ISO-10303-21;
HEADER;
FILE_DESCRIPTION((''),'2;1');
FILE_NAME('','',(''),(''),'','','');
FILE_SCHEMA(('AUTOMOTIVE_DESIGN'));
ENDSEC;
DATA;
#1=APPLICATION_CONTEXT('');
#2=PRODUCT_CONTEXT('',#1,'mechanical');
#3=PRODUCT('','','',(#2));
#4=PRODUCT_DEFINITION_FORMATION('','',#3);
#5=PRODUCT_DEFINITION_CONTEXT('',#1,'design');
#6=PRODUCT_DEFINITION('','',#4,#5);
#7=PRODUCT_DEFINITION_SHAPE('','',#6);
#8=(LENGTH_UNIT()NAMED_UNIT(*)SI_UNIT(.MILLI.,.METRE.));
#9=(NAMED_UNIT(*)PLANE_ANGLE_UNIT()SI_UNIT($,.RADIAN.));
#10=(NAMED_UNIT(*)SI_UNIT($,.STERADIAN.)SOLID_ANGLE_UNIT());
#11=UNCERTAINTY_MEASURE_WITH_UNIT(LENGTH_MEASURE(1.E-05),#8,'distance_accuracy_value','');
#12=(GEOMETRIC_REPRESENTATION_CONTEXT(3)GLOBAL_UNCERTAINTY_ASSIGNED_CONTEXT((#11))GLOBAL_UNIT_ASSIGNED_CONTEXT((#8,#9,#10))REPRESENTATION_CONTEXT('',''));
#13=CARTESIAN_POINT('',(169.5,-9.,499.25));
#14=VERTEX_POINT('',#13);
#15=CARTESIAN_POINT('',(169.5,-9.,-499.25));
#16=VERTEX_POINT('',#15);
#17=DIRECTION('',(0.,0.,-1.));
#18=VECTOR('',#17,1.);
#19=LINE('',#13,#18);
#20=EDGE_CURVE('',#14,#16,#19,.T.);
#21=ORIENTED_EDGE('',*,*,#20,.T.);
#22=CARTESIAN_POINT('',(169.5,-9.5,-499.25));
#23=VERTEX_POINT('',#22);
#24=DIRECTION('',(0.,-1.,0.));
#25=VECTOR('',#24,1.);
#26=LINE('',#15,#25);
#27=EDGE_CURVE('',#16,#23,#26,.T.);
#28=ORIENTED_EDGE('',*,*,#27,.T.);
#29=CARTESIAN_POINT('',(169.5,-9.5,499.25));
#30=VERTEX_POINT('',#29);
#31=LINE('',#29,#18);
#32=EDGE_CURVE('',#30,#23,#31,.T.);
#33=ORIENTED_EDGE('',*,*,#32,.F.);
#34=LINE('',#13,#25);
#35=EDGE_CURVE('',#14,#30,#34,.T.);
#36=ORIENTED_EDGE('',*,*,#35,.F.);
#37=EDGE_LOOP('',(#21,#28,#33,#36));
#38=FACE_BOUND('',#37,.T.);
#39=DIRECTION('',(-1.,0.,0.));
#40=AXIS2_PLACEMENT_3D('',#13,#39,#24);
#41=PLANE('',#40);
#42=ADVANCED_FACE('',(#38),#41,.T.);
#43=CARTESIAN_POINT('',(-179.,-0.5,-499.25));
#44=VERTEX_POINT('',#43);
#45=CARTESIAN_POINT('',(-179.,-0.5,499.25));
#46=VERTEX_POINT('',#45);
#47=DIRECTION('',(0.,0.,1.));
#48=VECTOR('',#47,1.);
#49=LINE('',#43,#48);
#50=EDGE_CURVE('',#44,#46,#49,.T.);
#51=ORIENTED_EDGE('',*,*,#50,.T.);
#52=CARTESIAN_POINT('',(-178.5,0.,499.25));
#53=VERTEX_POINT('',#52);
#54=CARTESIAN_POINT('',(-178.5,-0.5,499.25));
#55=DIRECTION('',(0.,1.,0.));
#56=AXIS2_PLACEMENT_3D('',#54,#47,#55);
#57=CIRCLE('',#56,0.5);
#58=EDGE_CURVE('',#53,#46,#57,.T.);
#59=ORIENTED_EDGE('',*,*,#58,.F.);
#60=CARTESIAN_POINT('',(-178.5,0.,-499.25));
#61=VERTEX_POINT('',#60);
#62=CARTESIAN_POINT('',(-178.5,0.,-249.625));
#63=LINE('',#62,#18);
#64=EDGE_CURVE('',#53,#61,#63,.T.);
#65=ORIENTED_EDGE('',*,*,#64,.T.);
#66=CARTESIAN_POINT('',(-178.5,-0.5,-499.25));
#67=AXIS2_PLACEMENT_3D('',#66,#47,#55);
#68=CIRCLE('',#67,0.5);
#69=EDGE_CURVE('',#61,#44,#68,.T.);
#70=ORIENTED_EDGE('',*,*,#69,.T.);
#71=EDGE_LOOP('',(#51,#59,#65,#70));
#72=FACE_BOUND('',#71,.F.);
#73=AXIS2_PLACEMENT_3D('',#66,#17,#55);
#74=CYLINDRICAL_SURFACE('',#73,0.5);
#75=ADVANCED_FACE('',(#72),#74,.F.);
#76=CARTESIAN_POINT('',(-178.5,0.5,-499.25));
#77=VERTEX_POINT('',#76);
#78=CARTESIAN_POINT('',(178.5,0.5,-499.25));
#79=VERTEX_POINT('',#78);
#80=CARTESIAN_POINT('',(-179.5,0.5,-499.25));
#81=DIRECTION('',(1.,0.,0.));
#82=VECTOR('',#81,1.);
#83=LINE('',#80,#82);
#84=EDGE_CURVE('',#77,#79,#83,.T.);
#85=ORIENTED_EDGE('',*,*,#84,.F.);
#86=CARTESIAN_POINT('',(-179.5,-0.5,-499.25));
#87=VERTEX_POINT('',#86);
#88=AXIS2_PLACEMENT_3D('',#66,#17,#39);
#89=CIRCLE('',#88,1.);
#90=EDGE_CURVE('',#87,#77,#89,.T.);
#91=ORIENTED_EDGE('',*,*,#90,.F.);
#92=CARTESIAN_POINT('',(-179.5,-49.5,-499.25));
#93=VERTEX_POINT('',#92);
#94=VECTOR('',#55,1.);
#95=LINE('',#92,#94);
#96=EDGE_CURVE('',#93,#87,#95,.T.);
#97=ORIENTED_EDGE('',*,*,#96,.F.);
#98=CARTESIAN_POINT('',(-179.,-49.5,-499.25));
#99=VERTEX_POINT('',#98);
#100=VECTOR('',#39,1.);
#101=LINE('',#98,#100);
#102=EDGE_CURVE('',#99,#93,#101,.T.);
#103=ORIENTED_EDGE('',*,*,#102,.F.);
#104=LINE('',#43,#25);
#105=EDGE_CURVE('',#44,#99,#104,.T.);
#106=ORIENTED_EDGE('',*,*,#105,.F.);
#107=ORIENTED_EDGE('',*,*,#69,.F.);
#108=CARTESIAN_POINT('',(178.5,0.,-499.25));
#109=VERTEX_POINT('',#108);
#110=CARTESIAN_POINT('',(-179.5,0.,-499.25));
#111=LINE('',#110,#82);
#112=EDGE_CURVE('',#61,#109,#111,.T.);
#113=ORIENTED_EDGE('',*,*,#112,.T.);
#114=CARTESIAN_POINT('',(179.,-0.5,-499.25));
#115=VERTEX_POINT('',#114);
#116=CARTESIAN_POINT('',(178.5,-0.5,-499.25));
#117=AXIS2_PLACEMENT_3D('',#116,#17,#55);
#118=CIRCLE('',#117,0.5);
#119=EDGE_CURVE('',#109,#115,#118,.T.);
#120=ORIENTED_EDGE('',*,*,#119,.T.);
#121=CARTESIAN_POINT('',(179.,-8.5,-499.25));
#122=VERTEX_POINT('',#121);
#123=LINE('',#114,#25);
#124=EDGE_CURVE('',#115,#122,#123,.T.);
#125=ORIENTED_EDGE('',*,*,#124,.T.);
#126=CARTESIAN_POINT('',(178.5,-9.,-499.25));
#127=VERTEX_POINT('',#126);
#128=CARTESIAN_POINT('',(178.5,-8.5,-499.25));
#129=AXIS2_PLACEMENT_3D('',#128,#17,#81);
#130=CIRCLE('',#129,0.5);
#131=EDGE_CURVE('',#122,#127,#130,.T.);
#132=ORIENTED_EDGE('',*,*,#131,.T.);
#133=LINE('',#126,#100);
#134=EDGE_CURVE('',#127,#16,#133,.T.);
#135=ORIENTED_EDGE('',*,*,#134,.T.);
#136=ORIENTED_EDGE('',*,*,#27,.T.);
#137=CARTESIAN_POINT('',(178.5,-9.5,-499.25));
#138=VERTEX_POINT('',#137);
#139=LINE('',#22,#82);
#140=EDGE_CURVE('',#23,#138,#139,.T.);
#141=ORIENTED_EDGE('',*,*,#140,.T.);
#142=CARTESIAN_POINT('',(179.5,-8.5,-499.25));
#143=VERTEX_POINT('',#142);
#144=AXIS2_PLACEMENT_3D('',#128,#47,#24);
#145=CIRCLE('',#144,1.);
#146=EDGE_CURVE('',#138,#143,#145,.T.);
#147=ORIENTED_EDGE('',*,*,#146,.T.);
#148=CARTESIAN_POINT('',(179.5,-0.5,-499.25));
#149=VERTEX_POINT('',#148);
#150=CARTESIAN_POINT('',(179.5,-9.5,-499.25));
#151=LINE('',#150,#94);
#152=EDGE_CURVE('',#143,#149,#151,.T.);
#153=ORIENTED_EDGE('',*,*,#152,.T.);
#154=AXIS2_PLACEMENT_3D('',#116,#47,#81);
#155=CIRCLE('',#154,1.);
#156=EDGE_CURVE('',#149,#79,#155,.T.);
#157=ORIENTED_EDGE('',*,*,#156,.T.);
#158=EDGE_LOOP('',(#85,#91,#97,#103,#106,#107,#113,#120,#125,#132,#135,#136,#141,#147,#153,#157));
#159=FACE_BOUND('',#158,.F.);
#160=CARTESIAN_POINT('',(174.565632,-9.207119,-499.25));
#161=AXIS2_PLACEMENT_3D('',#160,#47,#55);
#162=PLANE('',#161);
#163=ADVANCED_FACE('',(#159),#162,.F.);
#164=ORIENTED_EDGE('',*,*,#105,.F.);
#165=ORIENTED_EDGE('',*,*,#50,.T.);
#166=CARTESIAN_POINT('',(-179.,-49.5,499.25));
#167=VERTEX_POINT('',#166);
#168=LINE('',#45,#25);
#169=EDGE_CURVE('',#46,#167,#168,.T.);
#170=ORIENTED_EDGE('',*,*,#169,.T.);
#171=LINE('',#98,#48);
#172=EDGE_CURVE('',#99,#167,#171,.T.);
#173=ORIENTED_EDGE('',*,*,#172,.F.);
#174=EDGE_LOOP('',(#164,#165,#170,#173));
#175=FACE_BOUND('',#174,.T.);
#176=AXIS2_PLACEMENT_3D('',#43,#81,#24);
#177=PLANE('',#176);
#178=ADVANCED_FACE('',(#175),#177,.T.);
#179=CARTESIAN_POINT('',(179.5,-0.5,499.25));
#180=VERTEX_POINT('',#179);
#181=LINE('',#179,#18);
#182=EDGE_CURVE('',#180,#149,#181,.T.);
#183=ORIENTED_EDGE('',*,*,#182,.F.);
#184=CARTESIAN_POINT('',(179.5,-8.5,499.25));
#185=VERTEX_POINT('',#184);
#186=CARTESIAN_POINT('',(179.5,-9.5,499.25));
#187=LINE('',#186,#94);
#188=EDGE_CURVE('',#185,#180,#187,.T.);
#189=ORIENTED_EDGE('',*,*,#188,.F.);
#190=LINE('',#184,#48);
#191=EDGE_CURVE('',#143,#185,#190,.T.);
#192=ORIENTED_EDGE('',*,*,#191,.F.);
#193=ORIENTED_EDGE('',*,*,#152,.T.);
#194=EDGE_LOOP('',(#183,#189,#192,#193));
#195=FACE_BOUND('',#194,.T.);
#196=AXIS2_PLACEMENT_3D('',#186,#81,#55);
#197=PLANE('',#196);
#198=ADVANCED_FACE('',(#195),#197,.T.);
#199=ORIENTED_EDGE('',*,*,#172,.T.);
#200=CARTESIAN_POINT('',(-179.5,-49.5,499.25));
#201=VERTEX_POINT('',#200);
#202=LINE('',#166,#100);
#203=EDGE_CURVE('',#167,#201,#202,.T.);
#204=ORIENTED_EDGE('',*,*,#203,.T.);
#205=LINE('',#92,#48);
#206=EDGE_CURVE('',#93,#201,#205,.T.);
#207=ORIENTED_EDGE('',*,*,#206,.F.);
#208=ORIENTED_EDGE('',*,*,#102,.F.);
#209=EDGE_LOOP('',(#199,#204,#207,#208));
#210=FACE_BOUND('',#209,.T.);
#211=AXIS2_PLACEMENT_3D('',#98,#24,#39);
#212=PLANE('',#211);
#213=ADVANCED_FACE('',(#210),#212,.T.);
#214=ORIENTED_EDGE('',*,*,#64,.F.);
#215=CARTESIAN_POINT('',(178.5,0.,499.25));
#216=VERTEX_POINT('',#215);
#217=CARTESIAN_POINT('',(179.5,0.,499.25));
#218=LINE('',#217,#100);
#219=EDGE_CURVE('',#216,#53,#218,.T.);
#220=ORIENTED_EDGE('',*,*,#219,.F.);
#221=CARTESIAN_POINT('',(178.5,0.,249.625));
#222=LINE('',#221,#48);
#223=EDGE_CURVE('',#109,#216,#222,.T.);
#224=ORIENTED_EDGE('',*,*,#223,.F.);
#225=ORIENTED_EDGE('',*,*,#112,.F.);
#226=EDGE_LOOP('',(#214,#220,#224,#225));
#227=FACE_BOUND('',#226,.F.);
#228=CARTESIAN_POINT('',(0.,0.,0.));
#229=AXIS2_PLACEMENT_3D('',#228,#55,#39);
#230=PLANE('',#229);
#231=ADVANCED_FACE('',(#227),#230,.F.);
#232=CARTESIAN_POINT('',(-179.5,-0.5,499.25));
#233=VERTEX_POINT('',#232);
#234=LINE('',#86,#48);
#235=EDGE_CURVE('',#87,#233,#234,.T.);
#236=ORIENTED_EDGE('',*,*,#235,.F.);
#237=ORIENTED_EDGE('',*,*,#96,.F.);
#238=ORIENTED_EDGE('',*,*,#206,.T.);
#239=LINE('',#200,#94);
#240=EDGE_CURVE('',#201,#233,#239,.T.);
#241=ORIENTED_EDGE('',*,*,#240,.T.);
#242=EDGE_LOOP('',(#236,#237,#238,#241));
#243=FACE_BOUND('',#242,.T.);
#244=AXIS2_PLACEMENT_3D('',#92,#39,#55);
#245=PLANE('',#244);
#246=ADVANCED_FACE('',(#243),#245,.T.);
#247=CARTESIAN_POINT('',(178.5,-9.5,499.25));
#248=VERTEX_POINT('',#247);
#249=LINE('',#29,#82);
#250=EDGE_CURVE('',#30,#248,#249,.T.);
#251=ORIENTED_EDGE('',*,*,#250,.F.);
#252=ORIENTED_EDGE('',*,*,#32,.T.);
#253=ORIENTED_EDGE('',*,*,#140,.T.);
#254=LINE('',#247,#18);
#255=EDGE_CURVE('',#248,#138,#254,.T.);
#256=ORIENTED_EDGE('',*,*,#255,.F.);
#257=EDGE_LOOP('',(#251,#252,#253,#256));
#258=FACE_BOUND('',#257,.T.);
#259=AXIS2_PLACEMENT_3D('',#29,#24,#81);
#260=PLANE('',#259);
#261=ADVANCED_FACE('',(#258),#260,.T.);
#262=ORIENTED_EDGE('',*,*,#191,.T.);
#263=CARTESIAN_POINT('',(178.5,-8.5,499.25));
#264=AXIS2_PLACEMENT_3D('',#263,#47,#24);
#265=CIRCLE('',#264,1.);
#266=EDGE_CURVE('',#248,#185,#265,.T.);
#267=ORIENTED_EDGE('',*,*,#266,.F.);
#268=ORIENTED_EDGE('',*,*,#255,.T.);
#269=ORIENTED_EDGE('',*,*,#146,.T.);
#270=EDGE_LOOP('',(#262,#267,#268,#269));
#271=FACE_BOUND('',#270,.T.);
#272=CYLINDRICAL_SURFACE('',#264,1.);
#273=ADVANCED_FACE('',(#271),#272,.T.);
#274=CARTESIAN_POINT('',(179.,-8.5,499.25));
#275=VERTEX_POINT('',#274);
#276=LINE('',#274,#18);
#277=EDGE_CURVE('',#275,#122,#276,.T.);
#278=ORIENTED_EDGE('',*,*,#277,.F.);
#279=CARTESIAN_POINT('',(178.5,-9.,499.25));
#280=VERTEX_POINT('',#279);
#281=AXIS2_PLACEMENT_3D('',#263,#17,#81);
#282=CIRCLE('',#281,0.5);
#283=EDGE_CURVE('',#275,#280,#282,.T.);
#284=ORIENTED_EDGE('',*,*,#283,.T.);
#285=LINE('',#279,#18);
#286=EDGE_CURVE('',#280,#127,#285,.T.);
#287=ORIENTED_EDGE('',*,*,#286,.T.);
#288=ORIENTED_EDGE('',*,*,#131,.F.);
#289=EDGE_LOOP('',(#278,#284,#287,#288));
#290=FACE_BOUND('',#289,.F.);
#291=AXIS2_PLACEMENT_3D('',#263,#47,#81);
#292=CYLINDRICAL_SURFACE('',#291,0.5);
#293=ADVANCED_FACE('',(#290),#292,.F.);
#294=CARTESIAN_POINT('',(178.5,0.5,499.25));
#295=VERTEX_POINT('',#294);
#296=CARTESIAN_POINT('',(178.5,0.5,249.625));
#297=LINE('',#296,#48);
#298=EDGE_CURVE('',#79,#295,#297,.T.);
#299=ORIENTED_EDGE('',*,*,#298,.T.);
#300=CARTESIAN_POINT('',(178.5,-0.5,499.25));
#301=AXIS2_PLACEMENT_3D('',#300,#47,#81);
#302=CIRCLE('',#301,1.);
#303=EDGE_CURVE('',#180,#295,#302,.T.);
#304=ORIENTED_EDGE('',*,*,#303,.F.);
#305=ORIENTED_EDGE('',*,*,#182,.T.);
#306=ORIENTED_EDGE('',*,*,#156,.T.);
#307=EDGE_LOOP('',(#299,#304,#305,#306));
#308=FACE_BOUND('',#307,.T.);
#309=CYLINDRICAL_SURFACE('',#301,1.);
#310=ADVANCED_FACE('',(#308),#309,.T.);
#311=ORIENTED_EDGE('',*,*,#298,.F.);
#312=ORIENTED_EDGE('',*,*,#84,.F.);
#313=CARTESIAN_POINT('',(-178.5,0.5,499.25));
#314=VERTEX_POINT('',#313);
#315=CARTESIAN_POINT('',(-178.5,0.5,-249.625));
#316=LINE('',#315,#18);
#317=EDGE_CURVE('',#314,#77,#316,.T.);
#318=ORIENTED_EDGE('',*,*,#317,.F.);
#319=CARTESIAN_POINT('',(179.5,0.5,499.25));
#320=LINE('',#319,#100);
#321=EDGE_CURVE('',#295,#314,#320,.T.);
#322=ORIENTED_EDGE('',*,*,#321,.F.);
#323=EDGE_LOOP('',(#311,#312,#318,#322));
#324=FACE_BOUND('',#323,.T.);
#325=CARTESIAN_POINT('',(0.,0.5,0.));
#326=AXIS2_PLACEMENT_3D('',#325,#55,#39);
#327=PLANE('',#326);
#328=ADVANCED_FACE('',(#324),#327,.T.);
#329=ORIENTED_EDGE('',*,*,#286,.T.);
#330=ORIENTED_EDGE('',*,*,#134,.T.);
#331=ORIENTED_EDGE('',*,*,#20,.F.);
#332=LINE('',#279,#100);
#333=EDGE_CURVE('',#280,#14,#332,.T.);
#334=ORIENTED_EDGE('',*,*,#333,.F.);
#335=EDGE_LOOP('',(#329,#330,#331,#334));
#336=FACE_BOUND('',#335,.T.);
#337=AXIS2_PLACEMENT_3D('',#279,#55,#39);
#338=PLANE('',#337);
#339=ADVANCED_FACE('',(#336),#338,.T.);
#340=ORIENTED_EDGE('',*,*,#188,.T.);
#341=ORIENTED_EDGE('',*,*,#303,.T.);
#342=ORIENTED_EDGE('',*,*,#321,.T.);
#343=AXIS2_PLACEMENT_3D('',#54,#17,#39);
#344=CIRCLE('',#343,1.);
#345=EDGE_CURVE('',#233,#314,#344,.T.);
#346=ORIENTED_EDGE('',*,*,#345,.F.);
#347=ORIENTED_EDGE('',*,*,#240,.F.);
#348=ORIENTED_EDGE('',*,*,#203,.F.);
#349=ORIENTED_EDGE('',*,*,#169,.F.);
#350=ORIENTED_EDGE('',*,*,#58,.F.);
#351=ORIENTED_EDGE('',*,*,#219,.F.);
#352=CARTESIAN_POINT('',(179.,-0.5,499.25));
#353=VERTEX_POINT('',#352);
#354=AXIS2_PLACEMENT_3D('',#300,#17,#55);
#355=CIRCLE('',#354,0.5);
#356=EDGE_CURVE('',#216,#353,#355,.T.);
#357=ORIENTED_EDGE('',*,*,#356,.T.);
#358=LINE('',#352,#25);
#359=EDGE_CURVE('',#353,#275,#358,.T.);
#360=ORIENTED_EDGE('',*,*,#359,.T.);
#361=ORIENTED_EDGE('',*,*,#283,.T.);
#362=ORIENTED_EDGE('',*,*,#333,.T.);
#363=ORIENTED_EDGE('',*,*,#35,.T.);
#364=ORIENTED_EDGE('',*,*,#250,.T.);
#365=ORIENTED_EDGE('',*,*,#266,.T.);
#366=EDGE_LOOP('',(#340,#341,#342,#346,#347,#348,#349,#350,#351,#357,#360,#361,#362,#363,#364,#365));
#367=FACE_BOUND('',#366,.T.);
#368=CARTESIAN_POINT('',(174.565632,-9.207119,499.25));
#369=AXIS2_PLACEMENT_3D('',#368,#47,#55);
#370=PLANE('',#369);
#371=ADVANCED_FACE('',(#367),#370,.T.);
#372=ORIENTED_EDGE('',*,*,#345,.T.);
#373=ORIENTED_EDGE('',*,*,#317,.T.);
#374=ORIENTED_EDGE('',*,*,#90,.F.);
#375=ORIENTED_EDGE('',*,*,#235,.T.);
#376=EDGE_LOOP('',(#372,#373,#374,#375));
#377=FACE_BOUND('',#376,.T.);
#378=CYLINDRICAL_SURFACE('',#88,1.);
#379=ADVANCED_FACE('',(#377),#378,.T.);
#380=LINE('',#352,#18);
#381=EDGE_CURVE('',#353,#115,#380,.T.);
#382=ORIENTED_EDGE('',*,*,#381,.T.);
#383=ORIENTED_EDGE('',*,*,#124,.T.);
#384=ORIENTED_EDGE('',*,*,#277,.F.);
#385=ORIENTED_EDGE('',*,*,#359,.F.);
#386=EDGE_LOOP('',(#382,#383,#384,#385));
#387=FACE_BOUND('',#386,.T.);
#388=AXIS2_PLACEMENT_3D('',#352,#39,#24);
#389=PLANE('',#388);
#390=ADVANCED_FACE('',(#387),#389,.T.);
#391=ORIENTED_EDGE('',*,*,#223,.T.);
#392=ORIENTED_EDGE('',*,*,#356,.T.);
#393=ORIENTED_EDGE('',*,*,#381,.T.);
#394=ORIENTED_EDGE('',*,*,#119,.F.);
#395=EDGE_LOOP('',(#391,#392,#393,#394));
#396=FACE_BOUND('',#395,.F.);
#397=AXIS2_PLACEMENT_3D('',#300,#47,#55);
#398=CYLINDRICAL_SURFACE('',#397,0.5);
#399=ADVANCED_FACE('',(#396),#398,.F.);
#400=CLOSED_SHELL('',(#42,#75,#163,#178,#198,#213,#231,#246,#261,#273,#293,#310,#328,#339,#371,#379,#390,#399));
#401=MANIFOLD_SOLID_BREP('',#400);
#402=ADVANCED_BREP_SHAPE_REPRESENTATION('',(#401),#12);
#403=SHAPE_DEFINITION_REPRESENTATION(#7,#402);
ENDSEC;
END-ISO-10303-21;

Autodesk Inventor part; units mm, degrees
ref_plane "YZ Plane" through (0, 0, 0) normal (1, 0, 0) x (0, 1, 0)
ref_plane "XZ Plane" through (0, 0, 0) normal (0, 1, 0) x (-1, 0, 0)
ref_plane "XY Plane" through (0, 0, 0) normal (0, 0, 1) x (1, 0, 0)
sketch "Sketch2" plane through (0, 0, 0) normal (0, 1, 0) x (-1, 0, 0)
  line L0 (-179.5, 499.25) -> (179.5, 499.25)
  line L1 (179.5, 499.25) -> (179.5, -499.25)
  line L2 (179.5, -499.25) -> (-179.5, -499.25)
  line L3 (-179.5, -499.25) -> (-179.5, 499.25)
  line L4 (-179.5, 499.25) -> (179.5, -499.25) construction
  line L5 (179.5, 499.25) -> (-179.5, -499.25) construction
  point P0 (0, 0)
  dimension "d2" = 359
  dimension "d3" = 998.5
extrude "Plate1" add sketch "Sketch2" along normal blind 0.5
sketch "Sketch3" plane through (-179, 0.5, -499.25) normal (-1, 0, 0) x (0, -1, 0)
  line L0 (0, 998.5) -> (0, 0)
  line L1 (0, 0) -> (50, 0)
  line L2 (50, 0) -> (50, 998.5)
  line L3 (50, 998.5) -> (0, 998.5)
edge flange "Flange1" height 50 angle 90 thickness 0.5 bend radius 0.5 thickness toward (-1, 0, 0) relief tear relief width 0.5 relief depth 0.25 edges at (-179.5, 0, 0) wall of the first edge with corners at (-179, 0.5, 499.25) (-179, 0.5, -499.25) (-179, -49.5, -499.25) (-179, -49.5, 499.25)
bend "Bend1"
corner "Corner1"
sketch "Sketch6" plane through (179, 0.5, 499.25) normal (1, 0, 0) x (0, 1, 0)
  line L0 (0, -998.5) -> (0, 0)
  line L1 (0, 0) -> (-10, 0)
  line L2 (-10, 0) -> (-10, -998.5)
  line L3 (-10, -998.5) -> (0, -998.5)
edge flange "Flange4" height 10 angle 90 thickness 0.5 bend radius 0.5 thickness toward (1, 0, 0) relief tear relief width 0.5 relief depth 0.25 edges at (179.5, 0, 0) wall of the first edge with corners at (179, 0.5, -499.25) (179, 0.5, 499.25) (179, -9.5, 499.25) (179, -9.5, -499.25)
bend "Bend4"
corner "Corner4"
sketch "Sketch7" plane through (179.5, -9, 499.25) normal (0, -1, 0) x (1, 0, 0)
  line L0 (0, -998.5) -> (0, 0)
  line L1 (0, 0) -> (-10, 0)
  line L2 (-10, 0) -> (-10, -998.5)
  line L3 (-10, -998.5) -> (0, -998.5)
edge flange "Flange5" height 10 angle 90 thickness 0.5 bend radius 0.5 thickness toward (0, -1, 0) relief tear relief width 0.5 relief depth 0.25 edges at (179, -9.5, 0) wall of the first edge with corners at (179.5, -9, -499.25) (179.5, -9, 499.25) (169.5, -9, 499.25) (169.5, -9, -499.25)
bend "Bend5"
corner "Corner5"
equation "\"d3\" = Ancho - 3 * Thickness"
equation "\"d4\" = Thickness"
equation "\"d5\" = BendReliefWidth"
equation "\"d6\" = BendReliefDepth"
equation "\"d7\" = MinimumRemnant"
equation "\"d8\" = TransitionRadius"
equation "\"d11\" = BendRadius"
equation "\"d12\" = CornerReliefSize"
equation "\"d13\" = GapSize"
equation "\"d14\" = JacobiRadiusSize"
equation "\"d35\" = BendReliefWidth"
equation "\"d36\" = BendReliefDepth"
equation "\"d37\" = MinimumRemnant"
equation "\"d38\" = TransitionRadius"
equation "\"d41\" = BendRadius"
equation "\"d42\" = CornerReliefSize"
equation "\"d43\" = GapSize"
equation "\"d44\" = JacobiRadiusSize"
equation "\"d45\" = BendReliefWidth"
equation "\"d46\" = BendReliefDepth"
equation "\"d47\" = MinimumRemnant"
equation "\"d48\" = TransitionRadius"
equation "\"d51\" = BendRadius"
equation "\"d52\" = CornerReliefSize"
equation "\"d53\" = GapSize"
equation "\"d54\" = JacobiRadiusSize"
equation "\"BendRadius\" = Thickness"
equation "\"BendReliefWidth\" = Thickness"
equation "\"BendReliefDepth\" = 0.5 * Thickness"
equation "\"CornerReliefSize\" = 4 * Thickness"
equation "\"MinimumRemnant\" = 2 * Thickness"
equation "\"TransitionRadius\" = BendRadius"
equation "\"JacobiRadiusSize\" = BendRadius"
equation "\"GapSize\" = Thickness"
equation "\"Space5\" = 0"
equation "\"Space6\" = 0"
equation "\"Space7\" = 0"
equation "\"Ancho\" = 1000"
equation "\"Thickness\" = 0.5"
properties part number "Divisor"
